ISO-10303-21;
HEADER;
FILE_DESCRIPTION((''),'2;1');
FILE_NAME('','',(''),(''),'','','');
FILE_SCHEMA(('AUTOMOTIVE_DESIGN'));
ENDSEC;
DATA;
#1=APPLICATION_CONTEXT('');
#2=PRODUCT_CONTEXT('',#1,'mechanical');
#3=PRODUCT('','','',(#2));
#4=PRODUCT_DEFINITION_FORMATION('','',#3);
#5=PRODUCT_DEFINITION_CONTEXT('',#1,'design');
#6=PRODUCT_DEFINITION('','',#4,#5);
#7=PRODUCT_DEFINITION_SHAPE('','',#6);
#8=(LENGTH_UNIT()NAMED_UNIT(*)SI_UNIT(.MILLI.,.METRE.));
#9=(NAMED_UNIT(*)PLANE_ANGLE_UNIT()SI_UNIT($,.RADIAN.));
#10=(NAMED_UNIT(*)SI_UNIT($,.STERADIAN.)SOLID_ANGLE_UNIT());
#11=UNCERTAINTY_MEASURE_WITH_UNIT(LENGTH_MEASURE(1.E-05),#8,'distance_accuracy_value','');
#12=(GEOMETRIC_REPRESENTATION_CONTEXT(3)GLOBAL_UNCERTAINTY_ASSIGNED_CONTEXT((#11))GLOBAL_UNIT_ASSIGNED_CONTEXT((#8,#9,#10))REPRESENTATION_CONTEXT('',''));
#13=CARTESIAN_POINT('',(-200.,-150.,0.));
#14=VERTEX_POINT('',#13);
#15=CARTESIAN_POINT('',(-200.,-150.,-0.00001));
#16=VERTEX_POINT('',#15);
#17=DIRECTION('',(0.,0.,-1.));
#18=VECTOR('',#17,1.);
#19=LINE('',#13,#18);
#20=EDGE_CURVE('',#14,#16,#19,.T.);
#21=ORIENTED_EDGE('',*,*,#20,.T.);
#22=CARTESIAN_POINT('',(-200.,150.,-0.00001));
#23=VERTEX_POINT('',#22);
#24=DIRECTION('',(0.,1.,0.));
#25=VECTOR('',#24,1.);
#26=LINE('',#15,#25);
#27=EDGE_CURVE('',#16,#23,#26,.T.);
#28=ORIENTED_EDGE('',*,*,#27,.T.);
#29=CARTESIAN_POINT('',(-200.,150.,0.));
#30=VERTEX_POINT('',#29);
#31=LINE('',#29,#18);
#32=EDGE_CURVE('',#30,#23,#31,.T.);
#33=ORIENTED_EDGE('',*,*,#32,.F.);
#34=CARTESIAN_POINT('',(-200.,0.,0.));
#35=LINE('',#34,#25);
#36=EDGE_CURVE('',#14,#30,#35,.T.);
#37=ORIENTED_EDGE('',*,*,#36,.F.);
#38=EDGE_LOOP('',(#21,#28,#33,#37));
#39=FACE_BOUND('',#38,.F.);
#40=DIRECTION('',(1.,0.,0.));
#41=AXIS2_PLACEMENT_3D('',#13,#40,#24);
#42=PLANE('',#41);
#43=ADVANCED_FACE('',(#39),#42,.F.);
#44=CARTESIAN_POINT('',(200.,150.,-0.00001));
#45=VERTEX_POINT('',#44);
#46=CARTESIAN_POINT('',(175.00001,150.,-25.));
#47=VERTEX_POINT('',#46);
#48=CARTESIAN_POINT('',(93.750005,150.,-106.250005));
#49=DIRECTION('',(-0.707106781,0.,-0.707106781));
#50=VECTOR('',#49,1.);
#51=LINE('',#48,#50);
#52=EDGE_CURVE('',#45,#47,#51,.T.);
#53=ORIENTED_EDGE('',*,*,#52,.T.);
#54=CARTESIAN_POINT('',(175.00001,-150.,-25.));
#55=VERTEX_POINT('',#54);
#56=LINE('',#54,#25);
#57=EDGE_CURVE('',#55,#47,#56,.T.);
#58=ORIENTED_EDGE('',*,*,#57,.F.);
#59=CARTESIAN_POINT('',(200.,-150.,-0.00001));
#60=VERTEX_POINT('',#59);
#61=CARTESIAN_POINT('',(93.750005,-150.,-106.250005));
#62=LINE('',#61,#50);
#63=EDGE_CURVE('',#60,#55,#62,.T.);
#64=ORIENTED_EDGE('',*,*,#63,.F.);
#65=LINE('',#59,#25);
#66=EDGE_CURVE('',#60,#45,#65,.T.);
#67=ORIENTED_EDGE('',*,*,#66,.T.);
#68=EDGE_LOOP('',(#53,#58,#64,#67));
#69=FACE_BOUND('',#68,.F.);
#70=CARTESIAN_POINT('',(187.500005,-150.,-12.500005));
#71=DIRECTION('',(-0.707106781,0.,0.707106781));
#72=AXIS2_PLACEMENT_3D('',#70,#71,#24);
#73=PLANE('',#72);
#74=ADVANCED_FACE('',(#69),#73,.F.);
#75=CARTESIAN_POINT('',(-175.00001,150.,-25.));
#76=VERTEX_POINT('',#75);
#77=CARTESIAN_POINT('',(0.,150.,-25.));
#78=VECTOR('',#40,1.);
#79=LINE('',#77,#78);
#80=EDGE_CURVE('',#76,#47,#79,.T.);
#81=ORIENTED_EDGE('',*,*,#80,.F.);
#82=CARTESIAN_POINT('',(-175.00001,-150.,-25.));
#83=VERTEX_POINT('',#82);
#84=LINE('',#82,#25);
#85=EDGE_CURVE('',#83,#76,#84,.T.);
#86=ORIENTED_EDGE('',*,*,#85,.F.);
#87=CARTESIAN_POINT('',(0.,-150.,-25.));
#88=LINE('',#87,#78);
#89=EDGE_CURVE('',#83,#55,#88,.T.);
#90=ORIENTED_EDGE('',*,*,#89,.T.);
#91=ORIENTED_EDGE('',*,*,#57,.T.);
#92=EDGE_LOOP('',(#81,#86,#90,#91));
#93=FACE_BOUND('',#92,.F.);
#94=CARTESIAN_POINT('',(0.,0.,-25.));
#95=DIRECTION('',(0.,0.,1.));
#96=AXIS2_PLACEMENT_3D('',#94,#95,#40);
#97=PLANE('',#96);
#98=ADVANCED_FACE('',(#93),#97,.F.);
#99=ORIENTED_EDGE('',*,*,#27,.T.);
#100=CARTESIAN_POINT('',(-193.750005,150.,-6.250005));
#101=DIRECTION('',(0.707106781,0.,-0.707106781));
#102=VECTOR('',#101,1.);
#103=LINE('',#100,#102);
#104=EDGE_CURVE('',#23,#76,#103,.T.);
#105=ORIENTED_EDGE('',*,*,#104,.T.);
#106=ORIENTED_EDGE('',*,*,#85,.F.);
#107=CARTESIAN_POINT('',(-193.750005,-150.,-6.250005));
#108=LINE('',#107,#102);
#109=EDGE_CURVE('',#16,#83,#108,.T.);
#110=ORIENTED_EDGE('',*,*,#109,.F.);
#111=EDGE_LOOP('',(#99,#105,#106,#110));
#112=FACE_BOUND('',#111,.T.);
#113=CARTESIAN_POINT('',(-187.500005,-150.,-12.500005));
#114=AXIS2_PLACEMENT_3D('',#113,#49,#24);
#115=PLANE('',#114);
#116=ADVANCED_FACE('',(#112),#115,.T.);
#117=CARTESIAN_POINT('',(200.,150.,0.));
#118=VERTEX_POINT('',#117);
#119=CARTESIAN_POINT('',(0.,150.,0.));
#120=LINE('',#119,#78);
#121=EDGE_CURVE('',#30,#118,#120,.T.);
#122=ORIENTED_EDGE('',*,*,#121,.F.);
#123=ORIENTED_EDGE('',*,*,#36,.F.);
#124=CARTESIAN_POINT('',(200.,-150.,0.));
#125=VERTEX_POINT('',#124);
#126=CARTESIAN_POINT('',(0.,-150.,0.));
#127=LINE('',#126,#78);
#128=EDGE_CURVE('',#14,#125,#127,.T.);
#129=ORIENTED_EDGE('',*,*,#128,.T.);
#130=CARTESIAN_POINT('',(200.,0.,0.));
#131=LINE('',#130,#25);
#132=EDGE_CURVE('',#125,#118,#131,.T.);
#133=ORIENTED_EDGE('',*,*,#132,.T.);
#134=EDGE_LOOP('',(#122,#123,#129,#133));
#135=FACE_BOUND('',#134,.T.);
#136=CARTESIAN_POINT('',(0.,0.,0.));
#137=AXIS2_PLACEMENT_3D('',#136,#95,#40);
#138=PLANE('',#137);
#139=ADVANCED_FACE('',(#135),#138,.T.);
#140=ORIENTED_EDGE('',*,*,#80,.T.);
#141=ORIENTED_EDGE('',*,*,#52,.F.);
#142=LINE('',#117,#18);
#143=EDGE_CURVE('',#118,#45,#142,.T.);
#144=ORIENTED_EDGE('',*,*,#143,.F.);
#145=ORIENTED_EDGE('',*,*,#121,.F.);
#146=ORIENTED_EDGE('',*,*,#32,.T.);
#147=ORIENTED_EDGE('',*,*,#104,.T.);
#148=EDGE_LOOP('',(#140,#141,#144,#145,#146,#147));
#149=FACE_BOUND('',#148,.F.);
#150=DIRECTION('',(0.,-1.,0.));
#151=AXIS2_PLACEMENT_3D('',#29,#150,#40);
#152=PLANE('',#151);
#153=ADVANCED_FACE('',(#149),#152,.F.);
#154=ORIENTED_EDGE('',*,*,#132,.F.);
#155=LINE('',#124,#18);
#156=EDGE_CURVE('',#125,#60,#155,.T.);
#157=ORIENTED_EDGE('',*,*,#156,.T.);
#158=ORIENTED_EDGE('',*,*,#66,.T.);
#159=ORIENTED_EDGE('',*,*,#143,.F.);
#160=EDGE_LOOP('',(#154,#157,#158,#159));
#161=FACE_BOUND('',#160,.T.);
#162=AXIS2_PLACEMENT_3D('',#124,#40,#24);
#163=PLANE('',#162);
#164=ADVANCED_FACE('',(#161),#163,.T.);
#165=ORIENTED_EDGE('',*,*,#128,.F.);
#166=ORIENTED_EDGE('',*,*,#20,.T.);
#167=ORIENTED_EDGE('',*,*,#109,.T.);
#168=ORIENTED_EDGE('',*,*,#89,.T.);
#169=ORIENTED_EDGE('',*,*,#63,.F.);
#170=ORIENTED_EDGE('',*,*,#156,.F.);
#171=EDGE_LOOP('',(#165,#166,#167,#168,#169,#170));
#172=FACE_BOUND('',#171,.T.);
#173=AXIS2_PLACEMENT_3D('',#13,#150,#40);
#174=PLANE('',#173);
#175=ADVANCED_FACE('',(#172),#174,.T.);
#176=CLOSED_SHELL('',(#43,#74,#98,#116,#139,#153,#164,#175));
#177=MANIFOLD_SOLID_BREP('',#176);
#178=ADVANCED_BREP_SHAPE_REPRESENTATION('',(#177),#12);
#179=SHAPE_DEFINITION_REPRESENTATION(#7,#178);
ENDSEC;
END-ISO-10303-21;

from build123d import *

# Parameters (mm, degrees)
F0_W     = 400
F0_H     = 300
F1_DEPTH = 25
F2_SIZE  = 24.99999


# Not quite as in the source:
# - a fillet or chamfer is up to 0.001 mm smaller than in the source, because OpenCascade refuses the exact size


with BuildPart() as f1:
    # F0 (on Top) → F1 (new body)
    with BuildSketch(Plane.XY):
        Rectangle(F0_W, F0_H)
    extrude(amount=-F1_DEPTH)

    # F2 (size 25 in the source; OpenCascade refuses exactly that, so slightly less here)
    f2_edges = [f1.edges().sort_by_distance(p)[0] for p in [
        (-200, 0, -25),
        (200, 0, -25),
    ]]
    chamfer(f2_edges, length=F2_SIZE)


solid = f1.part
